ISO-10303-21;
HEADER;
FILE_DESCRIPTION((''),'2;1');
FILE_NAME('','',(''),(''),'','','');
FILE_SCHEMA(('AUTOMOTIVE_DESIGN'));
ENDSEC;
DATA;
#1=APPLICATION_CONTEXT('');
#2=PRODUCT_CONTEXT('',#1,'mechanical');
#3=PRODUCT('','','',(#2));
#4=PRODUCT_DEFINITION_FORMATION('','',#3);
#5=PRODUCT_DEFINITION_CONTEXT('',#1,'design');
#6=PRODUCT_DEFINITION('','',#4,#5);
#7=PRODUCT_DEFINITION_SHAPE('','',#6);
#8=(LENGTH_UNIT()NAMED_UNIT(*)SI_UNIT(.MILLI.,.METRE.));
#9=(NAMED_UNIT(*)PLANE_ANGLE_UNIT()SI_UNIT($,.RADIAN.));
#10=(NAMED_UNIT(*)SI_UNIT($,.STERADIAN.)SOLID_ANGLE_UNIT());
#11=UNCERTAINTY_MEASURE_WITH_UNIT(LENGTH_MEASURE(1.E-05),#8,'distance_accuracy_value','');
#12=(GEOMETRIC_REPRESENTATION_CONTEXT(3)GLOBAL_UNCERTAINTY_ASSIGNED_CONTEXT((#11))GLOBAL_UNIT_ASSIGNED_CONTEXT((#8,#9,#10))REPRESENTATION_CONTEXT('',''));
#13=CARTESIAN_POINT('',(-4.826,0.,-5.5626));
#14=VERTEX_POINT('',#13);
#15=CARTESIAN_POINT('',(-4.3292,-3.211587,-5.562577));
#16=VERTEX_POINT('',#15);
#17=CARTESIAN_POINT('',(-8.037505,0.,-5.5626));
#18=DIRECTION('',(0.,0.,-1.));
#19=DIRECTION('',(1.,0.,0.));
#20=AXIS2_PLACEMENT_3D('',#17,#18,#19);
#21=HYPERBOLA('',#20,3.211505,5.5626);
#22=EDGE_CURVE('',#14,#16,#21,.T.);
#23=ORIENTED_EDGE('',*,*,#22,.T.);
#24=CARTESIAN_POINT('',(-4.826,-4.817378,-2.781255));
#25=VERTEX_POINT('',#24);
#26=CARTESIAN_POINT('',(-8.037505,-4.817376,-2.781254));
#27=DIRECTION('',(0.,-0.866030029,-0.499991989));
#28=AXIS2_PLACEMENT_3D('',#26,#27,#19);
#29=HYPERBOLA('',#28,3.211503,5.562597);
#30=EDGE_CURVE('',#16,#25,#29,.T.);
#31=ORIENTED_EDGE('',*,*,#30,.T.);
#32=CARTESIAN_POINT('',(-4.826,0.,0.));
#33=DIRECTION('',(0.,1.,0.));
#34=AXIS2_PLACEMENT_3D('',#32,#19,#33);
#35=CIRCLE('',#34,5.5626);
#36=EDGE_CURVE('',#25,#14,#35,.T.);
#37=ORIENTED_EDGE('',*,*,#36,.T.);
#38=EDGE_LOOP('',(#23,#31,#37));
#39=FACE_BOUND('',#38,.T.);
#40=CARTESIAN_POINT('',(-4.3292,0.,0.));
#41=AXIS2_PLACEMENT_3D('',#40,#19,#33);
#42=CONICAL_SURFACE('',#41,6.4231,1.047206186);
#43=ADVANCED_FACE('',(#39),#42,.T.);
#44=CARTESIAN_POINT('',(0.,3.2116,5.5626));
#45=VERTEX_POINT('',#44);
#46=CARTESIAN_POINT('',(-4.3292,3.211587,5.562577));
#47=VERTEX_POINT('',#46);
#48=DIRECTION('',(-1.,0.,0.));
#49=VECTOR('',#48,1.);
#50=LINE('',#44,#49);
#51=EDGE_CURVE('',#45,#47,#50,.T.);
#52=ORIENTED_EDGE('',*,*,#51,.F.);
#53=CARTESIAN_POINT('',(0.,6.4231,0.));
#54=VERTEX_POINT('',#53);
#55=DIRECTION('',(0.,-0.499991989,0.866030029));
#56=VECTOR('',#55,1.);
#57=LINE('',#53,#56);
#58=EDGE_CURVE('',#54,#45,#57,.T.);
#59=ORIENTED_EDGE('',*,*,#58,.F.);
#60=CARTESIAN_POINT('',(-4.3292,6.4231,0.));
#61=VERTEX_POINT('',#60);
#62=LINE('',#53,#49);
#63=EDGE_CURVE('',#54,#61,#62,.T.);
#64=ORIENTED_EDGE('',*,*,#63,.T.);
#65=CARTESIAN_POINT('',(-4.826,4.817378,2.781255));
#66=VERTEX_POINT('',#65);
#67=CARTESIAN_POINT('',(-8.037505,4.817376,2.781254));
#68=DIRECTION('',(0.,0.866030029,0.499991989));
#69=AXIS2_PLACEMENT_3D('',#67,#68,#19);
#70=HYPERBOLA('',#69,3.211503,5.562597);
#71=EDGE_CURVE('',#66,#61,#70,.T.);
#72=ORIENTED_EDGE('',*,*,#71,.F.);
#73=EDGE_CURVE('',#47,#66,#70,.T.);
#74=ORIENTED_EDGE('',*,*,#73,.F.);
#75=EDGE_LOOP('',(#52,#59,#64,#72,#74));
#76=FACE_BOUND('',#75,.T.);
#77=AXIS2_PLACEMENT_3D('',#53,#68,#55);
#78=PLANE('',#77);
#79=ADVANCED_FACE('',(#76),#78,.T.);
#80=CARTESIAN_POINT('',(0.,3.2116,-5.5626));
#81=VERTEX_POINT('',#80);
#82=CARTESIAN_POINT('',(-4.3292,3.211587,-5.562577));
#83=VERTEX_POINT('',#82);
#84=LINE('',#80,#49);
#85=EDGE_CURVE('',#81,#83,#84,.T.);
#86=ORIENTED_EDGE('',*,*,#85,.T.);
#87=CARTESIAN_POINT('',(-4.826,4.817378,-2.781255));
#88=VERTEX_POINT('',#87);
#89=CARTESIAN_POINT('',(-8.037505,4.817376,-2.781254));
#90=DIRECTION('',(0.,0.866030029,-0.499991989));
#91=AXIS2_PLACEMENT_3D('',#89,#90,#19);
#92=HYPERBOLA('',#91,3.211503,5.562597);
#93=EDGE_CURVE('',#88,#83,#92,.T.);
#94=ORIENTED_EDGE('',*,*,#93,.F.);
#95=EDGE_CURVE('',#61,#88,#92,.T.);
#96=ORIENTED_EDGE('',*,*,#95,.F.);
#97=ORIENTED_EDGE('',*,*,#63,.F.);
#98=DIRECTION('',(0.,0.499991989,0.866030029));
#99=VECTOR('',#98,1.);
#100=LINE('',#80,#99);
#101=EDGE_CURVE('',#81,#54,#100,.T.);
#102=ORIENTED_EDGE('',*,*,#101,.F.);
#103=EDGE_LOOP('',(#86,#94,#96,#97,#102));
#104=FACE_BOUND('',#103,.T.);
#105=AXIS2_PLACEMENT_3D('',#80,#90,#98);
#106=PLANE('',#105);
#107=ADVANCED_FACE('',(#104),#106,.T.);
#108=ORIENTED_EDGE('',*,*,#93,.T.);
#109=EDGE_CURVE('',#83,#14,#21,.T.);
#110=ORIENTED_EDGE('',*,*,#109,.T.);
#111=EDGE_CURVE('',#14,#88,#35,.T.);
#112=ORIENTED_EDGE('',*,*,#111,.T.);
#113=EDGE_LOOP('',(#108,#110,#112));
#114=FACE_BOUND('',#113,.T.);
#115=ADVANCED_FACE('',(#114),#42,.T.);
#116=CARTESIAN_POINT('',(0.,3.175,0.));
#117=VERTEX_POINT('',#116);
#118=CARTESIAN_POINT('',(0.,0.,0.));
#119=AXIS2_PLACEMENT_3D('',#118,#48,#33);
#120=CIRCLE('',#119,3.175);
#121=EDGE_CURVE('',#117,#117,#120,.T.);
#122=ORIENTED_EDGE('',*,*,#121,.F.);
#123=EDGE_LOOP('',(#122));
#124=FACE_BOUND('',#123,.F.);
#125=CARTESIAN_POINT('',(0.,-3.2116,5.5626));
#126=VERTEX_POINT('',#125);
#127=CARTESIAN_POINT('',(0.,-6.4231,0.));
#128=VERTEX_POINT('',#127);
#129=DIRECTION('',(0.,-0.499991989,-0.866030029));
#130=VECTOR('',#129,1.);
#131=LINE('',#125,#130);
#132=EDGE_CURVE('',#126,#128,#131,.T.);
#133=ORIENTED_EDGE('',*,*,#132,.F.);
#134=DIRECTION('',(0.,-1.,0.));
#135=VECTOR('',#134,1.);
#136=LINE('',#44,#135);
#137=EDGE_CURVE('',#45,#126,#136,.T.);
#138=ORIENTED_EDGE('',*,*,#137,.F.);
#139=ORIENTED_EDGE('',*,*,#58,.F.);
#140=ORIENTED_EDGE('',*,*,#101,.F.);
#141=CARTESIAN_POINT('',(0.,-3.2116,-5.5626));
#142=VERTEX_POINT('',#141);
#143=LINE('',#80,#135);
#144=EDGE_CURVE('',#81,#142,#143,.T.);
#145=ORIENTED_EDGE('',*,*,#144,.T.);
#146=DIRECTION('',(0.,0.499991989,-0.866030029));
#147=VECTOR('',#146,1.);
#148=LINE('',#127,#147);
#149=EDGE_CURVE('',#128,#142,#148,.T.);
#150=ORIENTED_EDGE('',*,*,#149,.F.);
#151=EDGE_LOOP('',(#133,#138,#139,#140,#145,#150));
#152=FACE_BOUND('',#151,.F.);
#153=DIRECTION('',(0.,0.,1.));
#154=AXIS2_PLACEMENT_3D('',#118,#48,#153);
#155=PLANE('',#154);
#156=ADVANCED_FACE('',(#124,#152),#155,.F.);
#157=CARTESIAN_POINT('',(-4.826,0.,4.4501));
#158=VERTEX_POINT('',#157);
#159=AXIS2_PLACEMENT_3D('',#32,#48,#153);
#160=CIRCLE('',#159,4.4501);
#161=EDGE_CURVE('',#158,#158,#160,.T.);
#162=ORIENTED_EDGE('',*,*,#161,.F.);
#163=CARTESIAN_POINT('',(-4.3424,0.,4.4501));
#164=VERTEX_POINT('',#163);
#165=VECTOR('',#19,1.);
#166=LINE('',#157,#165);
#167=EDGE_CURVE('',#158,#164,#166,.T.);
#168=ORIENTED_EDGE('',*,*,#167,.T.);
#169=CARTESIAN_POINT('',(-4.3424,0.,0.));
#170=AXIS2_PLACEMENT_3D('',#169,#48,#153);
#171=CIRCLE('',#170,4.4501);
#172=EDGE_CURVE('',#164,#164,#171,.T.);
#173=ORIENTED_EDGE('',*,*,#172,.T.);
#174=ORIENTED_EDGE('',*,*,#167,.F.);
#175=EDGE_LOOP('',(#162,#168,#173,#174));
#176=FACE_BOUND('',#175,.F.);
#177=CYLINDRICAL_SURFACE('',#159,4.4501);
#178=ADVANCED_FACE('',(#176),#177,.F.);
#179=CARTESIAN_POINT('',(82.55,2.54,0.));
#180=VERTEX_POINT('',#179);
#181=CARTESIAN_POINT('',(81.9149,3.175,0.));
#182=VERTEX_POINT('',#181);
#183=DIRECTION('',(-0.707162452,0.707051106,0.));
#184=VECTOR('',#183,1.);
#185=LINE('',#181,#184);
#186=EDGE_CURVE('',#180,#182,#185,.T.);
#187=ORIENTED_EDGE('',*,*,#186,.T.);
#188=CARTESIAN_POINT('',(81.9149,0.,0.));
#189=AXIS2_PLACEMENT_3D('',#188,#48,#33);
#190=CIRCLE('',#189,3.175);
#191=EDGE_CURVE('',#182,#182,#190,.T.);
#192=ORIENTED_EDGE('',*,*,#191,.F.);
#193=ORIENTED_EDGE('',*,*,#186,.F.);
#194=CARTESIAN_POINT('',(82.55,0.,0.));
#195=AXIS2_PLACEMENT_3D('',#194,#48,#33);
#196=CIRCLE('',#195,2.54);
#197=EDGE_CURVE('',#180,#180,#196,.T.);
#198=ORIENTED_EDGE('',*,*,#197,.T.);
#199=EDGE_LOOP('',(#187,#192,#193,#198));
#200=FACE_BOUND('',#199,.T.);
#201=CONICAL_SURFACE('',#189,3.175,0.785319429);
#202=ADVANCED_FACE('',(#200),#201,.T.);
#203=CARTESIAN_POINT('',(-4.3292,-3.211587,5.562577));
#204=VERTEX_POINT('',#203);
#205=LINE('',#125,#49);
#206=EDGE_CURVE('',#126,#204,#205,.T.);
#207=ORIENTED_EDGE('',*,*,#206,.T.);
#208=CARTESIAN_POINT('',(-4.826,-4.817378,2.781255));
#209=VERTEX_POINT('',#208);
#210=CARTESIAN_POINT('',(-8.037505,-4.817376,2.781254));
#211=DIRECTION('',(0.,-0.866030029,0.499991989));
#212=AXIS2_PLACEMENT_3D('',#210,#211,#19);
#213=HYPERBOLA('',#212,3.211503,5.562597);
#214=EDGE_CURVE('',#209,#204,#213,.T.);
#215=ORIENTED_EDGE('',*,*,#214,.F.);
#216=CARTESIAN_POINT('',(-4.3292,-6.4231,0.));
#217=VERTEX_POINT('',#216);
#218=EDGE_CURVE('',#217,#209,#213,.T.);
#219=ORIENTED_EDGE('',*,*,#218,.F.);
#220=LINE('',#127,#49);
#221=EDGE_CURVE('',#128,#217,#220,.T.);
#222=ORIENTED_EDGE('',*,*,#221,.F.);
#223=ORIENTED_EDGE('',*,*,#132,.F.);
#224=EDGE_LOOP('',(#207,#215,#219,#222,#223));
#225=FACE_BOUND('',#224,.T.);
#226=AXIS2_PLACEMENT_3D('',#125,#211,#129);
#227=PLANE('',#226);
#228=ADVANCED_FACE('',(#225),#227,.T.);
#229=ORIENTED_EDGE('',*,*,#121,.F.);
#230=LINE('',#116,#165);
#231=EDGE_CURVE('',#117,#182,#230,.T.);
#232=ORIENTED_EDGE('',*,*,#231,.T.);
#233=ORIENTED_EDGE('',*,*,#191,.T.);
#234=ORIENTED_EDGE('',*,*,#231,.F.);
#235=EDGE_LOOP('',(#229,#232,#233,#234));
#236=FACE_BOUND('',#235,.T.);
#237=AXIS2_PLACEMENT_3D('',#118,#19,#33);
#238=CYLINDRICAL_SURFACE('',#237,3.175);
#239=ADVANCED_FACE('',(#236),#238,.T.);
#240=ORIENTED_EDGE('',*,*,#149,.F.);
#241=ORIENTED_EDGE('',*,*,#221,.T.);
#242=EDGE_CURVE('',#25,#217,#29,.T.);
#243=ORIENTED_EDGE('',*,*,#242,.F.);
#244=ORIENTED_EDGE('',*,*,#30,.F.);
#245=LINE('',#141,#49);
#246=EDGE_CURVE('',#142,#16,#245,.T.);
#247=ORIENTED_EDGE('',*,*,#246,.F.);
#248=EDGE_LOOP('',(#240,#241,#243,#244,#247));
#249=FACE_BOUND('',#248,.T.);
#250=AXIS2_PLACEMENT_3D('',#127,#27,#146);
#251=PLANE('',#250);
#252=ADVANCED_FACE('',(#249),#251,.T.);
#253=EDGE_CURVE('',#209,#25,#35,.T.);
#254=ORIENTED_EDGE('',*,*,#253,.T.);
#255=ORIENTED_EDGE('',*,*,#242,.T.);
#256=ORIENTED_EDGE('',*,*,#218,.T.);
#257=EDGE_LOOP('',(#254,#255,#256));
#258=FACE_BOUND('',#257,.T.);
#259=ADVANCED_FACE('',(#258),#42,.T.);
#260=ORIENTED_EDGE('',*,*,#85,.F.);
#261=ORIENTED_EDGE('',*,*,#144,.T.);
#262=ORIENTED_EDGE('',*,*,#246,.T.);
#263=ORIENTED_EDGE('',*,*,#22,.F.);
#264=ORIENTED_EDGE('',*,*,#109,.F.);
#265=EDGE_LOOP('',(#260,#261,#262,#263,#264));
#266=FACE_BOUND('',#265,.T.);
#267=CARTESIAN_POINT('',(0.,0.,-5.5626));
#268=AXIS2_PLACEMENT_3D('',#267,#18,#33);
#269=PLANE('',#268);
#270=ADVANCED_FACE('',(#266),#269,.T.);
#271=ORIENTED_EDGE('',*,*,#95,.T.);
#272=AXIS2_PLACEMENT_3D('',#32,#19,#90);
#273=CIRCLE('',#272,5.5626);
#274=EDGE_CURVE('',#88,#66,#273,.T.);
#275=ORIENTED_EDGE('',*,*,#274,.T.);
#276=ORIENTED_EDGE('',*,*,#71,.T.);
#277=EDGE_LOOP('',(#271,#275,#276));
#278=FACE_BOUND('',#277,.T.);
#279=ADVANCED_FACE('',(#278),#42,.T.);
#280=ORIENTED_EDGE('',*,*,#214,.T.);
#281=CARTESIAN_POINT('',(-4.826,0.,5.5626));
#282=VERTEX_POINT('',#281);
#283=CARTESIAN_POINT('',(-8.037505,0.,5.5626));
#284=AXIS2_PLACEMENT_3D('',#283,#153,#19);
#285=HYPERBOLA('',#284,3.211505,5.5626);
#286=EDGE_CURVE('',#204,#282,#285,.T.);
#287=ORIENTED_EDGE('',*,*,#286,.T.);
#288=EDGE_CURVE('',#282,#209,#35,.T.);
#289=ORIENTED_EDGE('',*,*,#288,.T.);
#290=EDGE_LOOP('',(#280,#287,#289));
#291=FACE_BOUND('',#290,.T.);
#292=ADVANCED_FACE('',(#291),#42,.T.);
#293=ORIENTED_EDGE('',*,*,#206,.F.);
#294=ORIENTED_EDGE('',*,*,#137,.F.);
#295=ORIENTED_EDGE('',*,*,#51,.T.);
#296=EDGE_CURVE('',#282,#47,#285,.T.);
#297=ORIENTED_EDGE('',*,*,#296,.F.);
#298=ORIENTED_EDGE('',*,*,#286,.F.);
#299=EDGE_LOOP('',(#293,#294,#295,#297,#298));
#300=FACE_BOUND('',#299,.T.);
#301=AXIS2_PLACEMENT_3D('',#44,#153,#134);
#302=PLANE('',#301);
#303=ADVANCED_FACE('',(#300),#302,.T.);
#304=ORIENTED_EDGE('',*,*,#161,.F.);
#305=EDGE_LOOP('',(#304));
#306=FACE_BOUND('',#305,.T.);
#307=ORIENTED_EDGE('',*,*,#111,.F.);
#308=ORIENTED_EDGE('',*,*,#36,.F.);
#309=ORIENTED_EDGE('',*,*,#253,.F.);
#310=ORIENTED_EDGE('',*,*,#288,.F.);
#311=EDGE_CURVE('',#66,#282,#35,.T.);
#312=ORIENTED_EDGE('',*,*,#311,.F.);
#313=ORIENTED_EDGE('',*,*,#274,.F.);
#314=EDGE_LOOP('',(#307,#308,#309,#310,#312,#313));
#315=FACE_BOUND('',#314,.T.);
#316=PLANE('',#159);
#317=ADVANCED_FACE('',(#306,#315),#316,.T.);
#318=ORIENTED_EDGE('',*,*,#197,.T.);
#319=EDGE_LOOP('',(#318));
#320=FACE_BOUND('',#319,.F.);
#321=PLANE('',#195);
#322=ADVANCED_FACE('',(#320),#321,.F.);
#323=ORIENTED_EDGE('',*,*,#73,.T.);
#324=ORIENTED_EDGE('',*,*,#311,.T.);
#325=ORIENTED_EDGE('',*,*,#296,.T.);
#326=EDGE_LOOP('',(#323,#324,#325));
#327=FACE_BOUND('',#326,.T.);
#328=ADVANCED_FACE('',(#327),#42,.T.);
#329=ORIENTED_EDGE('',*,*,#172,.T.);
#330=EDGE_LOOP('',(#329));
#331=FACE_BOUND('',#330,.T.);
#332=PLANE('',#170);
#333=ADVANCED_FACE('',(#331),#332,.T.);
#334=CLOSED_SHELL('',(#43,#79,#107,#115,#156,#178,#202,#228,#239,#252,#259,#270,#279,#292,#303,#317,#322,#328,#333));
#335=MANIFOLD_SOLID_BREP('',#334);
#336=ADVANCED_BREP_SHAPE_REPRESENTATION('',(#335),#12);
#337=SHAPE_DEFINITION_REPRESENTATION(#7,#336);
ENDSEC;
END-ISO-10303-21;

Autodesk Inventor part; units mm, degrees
ref_plane "YZ Plane" through (0, 0, 0) normal (1, 0, 0) x (0, 1, 0)
ref_plane "XZ Plane" through (0, 0, 0) normal (0, 1, 0) x (-1, 0, 0)
sketch "Sketch1" plane through (0, 0, 0) normal (0, 0, 1) x (1, 0, 0)
  line L0 (0, 3.175) -> (82.55, 3.175)
  line L1 (82.55, 3.175) -> (82.55, 0)
  line L2 (82.55, 0) -> (0, 0)
  line L3 (0, 0) -> (0, 3.175)
  line L4 (0, -0.635) -> (0, 3.81) projected
  line L5 (-16.51, 0) -> (99.06, 0) projected
  dimension "d1" = 6.35
  dimension "d13" = 82.55
revolve "Body" add sketch "Sketch1" angle 360 about axis through (82.55, 0, 0) along (-1, 0, 0)
sketch "Sketch2" plane through (0, 0, 0) normal (-1, 0, 0) x (0, 0, 1)
  line L0 (0, 6.4231) -> (5.5626, 3.2116)
  line L1 (5.5626, 3.2116) -> (5.5626, -3.2116)
  line L2 (5.5626, -3.2116) -> (0, -6.4231)
  line L3 (0, -6.4231) -> (-5.5626, -3.2116)
  line L4 (-5.5626, -3.2116) -> (-5.5626, 3.2116)
  line L5 (-5.5626, 3.2116) -> (0, 6.4231)
  line L6 (-7.7876, 0) -> (7.7876, 0) projected
  line L7 (0, 8.9924) -> (0, -8.9924) projected
  point P0 (0, 0)
  point P1 (0, 0)
  point P2 (0, 0)
  dimension "d8" = 11.1252
extrude "Head" add sketch "Sketch2" along normal blind 4.826
sketch "Sketch3" plane through (-4.826, 0, 0) normal (-1, 0, 0) x (0, 0, 1)
  circle A0 centre (0, 0) radius 4.4501
  point P0 (0, 0)
  dimension "d18" = 8.9002
extrude "Indent" cut sketch "Sketch3" against normal blind 0.4836
sketch "Sketch4" plane through (0, 0, 0) normal (0, 0, 1) x (1, 0, 0)
  line L0 (-4.826, 5.5626) -> (-4.826, 6.4231)
  line L1 (-4.826, 6.4231) -> (-4.3292, 6.4231)
  line L2 (-4.3292, 6.4231) -> (-4.826, 5.5626)
  line L3 (-5.7912, 0) -> (0.9652, 0) projected
  line L4 (0, 6.4231) -> (-4.826, 6.4231) projected
  line L5 (-4.826, 3.2116) -> (-4.826, 6.4231) projected
  dimension "d4" = 30
  dimension "d17" = 11.1252
revolve "Chamfer1" cut sketch "Sketch4" angle 360 about axis through (-10, 0, 0) along (1, 0, 0)
thread "Thread" size "1/4-20 UNC" class "2A" standard "ANSI Unified Screw Threads" length 70.1675
chamfer "Chamfer2" distance 0.635 distance2 0.6351 1 edges at (82.55, -3.175, 0) measured on face at (82.55, 0.6012, 0.871)
ref_plane "Work Plane1" through (1.75, 0, 0) normal (0, 0, -1) x (1, 0, 0)
equation "\"d1\" = GD"
equation "\"d13\" = NLG"
equation "\"d8\" = SW"
equation "\"d2\" = KOH - SD"
equation "\"d18\" = KOD2"
equation "\"d4\" = ANG1"
equation "\"d17\" = SW"
equation "\"d9\" = GEL"
equation "\"d5\" = -0.5 * SPD + 0.5 * GD"
equation "\"NLG\" = 82.55"
equation "\"GD\" = NND"
equation "\"BDM\" = NND"
equation "\"KOH\" = 4.826"
equation "\"GEL\" = 70.1675"
equation "\"SW\" = 11.1252"
equation "\"SPD\" = GD1"
equation "\"SD\" = 0"
equation "\"ANG1\" = 30deg"
equation "\"GAL\" = 0.635"
equation "\"GUL\" = GAL"
equation "\"KOH2\" = 0.1 * KOH"
equation "\"KOD2\" = 0.8 * SW"
equation "\"GD1\" = 5.08"
equation "\"THREADDIA\" = 6.35"
equation "\"SDH\" = SW"
equation "\"TOA\" = 30deg"
equation "\"RR\" = 0.0635"
equation "\"NND\" = 6.35"
equation "\"SW0\" = SW"
equation "\"SD2\" = NND"
equation "\"E0\" = 1.155 * SW"
properties part number "ANSI B18.6.3 - 1/4-20 UNC - 3.25" material "Steel, Mild"
